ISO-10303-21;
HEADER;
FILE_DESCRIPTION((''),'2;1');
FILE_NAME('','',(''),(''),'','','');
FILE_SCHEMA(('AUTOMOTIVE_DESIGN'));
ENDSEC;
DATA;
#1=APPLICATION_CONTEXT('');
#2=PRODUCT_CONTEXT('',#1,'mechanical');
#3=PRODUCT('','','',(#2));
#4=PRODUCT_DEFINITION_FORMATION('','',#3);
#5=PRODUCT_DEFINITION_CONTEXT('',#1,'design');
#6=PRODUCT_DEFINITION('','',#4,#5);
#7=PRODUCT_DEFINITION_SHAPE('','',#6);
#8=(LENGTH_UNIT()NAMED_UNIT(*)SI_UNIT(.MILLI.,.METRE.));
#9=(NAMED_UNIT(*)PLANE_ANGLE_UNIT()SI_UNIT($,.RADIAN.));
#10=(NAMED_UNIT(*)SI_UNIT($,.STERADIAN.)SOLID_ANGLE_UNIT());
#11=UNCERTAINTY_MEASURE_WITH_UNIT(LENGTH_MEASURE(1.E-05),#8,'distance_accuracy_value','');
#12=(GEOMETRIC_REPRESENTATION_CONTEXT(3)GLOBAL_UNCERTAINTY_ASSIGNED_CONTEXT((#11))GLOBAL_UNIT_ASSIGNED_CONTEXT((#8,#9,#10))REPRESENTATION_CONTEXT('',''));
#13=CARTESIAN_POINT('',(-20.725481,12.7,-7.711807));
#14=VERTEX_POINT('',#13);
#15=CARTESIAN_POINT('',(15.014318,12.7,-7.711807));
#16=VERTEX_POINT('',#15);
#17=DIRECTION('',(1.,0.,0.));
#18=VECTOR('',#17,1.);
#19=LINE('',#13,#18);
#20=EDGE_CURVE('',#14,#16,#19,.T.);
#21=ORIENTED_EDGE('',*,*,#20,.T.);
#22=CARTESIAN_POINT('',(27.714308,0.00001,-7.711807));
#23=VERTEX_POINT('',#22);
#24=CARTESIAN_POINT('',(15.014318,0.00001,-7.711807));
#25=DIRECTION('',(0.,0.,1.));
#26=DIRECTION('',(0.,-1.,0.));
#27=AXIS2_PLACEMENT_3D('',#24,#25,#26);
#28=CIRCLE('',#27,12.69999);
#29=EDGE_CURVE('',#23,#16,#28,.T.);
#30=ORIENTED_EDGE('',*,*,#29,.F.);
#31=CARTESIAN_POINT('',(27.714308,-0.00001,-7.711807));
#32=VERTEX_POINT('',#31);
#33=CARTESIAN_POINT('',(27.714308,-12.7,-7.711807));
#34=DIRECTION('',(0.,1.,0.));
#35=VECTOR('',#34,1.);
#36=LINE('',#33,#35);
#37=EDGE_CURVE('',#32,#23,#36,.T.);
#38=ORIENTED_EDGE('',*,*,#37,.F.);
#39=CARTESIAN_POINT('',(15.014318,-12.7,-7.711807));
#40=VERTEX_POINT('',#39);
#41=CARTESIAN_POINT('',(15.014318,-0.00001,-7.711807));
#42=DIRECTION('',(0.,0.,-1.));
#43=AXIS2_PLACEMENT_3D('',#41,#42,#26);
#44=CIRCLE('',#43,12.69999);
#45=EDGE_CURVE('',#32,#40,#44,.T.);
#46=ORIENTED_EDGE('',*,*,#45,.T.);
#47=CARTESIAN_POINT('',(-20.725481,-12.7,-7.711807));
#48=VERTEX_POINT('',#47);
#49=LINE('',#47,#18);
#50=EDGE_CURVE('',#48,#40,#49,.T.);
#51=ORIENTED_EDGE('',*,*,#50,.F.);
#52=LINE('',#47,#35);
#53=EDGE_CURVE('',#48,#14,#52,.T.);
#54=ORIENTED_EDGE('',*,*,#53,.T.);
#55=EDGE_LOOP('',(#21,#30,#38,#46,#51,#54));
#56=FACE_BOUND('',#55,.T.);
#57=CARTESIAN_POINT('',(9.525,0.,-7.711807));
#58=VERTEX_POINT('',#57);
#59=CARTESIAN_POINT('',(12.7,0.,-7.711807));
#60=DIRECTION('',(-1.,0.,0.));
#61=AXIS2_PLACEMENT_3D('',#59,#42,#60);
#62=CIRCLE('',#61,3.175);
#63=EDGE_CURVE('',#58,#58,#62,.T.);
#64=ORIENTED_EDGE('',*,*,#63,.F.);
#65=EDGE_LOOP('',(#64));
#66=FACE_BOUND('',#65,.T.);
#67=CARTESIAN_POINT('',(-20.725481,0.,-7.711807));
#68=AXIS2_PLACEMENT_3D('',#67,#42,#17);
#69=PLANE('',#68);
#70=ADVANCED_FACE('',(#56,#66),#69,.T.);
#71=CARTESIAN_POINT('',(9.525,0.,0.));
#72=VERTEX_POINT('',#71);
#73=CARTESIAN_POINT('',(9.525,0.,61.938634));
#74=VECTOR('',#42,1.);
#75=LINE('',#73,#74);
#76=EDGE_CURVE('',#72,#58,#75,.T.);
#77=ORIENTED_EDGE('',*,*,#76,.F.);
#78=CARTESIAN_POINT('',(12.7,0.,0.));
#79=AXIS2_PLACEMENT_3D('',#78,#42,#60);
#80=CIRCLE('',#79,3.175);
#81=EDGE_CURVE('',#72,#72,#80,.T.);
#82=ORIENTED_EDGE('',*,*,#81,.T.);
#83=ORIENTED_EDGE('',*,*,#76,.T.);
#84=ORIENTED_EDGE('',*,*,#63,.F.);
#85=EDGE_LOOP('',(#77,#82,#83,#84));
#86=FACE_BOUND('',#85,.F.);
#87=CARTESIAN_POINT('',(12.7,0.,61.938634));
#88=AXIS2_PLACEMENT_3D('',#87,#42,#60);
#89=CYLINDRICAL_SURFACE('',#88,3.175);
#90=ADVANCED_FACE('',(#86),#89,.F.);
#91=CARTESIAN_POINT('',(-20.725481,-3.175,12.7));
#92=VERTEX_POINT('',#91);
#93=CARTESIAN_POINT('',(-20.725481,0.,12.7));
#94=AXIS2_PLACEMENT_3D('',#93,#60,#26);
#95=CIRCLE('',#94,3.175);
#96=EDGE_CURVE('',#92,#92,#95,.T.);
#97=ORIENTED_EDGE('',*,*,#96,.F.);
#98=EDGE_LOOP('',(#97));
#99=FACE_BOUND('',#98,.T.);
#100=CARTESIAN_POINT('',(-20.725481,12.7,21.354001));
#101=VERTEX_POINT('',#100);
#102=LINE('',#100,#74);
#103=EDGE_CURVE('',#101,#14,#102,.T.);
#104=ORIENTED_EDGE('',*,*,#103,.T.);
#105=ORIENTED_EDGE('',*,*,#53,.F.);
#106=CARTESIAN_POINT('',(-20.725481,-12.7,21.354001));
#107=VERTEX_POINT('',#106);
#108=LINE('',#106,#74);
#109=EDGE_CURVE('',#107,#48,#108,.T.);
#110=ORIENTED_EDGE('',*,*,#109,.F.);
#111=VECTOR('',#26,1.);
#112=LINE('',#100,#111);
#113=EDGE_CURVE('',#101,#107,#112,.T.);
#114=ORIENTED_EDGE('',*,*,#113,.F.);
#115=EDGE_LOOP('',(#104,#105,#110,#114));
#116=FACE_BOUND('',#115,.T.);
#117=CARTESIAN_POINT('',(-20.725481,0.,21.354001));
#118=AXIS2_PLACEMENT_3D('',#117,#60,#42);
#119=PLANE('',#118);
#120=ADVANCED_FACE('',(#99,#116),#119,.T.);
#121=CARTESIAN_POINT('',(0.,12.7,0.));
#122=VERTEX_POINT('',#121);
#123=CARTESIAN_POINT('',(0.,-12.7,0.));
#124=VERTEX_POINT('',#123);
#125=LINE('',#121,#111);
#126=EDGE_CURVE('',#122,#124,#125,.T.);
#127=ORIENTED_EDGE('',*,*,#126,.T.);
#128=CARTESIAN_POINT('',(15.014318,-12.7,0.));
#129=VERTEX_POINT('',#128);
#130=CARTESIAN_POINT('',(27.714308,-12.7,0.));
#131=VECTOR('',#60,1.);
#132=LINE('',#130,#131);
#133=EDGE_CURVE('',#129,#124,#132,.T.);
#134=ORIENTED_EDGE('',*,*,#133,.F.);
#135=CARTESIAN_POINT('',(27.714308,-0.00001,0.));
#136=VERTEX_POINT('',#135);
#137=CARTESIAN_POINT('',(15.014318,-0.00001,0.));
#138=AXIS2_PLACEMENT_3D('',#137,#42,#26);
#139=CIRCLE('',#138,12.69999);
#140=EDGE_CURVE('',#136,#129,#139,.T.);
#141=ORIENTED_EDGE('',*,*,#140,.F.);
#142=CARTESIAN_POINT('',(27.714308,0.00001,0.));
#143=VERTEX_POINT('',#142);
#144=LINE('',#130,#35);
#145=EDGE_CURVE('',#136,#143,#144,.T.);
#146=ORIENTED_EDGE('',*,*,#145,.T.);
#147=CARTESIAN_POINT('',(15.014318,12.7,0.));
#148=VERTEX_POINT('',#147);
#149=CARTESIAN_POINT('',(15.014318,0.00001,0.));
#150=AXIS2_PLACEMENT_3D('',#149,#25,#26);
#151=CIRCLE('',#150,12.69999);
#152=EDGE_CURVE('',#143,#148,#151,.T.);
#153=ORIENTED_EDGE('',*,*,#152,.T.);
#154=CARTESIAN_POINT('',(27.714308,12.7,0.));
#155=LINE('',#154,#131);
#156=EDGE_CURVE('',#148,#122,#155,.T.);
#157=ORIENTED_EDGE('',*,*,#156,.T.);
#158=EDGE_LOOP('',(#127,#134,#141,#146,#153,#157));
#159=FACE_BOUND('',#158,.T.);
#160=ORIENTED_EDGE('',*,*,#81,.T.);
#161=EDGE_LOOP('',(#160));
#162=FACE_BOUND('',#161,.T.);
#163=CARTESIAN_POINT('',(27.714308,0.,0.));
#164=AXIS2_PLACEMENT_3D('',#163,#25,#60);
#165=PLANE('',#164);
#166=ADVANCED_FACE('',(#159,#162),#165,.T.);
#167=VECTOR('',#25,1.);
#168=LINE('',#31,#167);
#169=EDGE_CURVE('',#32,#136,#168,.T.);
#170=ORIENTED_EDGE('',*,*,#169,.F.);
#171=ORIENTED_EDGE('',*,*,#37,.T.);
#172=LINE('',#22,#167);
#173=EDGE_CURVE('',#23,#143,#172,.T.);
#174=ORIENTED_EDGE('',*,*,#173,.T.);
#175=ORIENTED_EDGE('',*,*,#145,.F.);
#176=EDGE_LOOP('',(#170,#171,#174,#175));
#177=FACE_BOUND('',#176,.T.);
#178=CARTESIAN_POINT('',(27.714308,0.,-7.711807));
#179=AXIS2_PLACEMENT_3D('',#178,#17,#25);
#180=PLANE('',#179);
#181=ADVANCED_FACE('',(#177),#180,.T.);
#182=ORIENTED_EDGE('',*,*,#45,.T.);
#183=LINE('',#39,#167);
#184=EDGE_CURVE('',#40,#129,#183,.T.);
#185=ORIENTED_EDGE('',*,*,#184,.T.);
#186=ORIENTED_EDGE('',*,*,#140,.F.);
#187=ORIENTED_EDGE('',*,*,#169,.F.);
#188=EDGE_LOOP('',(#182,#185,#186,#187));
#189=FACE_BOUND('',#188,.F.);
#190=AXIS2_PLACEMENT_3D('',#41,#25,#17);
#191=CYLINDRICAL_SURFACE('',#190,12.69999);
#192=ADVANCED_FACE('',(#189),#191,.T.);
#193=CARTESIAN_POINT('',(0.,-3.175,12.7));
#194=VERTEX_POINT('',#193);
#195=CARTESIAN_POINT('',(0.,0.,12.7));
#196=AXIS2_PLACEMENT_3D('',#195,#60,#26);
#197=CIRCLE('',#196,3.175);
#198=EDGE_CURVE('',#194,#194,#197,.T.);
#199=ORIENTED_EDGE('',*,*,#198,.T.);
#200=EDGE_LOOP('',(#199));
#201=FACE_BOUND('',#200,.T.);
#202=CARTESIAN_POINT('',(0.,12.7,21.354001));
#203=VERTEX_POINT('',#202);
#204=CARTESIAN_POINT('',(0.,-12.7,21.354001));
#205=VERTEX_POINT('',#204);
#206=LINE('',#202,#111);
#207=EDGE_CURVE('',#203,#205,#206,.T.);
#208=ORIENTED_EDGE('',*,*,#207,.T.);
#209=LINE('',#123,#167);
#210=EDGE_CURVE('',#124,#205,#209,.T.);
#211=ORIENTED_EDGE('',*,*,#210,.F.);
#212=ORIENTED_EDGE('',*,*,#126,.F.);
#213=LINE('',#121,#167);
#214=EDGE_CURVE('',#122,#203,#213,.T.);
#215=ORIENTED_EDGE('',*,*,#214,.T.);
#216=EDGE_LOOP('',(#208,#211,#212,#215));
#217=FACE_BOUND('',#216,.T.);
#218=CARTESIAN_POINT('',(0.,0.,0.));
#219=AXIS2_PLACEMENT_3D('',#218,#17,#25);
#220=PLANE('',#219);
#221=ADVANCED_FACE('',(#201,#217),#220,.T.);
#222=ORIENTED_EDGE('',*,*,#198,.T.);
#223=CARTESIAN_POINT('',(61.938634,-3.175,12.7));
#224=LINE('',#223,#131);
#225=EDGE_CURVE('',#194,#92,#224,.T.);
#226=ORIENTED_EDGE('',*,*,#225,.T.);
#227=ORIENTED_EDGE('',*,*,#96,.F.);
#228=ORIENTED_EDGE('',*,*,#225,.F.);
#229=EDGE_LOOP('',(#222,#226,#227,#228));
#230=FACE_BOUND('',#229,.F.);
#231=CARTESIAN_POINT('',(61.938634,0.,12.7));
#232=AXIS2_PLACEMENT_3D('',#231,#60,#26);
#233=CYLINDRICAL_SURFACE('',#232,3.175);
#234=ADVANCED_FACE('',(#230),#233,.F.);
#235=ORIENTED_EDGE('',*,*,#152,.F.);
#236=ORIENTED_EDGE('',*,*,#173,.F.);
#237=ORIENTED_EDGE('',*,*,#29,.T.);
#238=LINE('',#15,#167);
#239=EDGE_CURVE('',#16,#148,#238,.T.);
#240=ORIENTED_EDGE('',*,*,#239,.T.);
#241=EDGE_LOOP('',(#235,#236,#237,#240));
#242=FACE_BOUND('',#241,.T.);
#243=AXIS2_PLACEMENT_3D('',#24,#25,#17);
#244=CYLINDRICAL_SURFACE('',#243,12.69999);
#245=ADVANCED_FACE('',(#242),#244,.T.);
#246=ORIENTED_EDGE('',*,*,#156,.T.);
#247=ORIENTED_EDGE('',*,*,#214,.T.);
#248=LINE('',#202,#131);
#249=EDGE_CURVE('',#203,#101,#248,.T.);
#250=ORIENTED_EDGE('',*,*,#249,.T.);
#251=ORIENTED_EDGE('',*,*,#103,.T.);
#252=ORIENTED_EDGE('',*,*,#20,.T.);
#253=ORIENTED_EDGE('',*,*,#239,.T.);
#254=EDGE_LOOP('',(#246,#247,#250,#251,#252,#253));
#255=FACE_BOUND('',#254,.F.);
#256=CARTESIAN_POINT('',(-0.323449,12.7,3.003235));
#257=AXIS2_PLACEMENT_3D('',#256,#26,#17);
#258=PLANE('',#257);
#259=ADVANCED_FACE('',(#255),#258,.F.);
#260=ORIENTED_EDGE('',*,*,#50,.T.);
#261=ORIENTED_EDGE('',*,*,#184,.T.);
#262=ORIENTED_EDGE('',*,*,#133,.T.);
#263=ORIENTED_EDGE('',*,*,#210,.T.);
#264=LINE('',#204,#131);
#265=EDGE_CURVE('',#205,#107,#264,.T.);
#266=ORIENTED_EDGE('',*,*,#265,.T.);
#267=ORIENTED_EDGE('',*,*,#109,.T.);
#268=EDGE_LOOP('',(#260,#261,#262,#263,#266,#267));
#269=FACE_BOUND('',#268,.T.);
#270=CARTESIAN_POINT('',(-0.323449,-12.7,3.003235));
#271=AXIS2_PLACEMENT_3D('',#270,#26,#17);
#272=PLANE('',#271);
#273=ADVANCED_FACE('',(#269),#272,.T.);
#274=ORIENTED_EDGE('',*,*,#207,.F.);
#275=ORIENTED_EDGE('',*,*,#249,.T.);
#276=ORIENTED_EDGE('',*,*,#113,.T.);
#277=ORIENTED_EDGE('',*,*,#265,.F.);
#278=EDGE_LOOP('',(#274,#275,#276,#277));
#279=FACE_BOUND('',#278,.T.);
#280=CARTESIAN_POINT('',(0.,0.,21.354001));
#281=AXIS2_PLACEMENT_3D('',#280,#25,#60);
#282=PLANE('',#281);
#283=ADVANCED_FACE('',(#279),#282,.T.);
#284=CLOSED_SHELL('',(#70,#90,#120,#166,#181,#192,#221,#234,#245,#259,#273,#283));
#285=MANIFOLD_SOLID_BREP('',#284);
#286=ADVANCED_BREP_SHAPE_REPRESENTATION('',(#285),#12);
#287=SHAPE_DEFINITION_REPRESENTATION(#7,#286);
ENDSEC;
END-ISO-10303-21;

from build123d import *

# Parameters (mm, degrees)
F1_DEPTH = 12.7
F2_R     = 12.69999
F4_D     = 6.35
F6_D     = 6.35


# Not quite as in the source:
# - a fillet or chamfer is up to 0.001 mm smaller than in the source, because OpenCascade refuses the exact size


with BuildPart() as f1:
    # F0 (on Front) → F1 (new body, symmetric)
    with BuildSketch(Plane.XZ):
        Polygon((27.7143083513, 0), (0, 0), (0, 21.3540010154), (-20.7254812121, 21.3540010154), (-20.7254812121, -7.7118072659), (27.7143083513, -7.7118072659), align=None)
    extrude(amount=F1_DEPTH, both=True)

    # F2 (radius 12.7 in the source; OpenCascade refuses exactly that, so slightly less here)
    f2_edges = [f1.edges().sort_by_distance(p)[0] for p in [
        (27.714308, -12.7, -3.855904),
        (27.714308, 12.7, -3.855904),
    ]]
    fillet(f2_edges, radius=F2_R)

    # F4 (through all)
    with Locations(Plane.XY):
        with Locations((12.7, 0)):
            Hole(F4_D / 2)

    # F6 (through all)
    with Locations(Plane.YZ):
        with Locations((0, 12.7)):
            Hole(F6_D / 2)


solid = f1.part
